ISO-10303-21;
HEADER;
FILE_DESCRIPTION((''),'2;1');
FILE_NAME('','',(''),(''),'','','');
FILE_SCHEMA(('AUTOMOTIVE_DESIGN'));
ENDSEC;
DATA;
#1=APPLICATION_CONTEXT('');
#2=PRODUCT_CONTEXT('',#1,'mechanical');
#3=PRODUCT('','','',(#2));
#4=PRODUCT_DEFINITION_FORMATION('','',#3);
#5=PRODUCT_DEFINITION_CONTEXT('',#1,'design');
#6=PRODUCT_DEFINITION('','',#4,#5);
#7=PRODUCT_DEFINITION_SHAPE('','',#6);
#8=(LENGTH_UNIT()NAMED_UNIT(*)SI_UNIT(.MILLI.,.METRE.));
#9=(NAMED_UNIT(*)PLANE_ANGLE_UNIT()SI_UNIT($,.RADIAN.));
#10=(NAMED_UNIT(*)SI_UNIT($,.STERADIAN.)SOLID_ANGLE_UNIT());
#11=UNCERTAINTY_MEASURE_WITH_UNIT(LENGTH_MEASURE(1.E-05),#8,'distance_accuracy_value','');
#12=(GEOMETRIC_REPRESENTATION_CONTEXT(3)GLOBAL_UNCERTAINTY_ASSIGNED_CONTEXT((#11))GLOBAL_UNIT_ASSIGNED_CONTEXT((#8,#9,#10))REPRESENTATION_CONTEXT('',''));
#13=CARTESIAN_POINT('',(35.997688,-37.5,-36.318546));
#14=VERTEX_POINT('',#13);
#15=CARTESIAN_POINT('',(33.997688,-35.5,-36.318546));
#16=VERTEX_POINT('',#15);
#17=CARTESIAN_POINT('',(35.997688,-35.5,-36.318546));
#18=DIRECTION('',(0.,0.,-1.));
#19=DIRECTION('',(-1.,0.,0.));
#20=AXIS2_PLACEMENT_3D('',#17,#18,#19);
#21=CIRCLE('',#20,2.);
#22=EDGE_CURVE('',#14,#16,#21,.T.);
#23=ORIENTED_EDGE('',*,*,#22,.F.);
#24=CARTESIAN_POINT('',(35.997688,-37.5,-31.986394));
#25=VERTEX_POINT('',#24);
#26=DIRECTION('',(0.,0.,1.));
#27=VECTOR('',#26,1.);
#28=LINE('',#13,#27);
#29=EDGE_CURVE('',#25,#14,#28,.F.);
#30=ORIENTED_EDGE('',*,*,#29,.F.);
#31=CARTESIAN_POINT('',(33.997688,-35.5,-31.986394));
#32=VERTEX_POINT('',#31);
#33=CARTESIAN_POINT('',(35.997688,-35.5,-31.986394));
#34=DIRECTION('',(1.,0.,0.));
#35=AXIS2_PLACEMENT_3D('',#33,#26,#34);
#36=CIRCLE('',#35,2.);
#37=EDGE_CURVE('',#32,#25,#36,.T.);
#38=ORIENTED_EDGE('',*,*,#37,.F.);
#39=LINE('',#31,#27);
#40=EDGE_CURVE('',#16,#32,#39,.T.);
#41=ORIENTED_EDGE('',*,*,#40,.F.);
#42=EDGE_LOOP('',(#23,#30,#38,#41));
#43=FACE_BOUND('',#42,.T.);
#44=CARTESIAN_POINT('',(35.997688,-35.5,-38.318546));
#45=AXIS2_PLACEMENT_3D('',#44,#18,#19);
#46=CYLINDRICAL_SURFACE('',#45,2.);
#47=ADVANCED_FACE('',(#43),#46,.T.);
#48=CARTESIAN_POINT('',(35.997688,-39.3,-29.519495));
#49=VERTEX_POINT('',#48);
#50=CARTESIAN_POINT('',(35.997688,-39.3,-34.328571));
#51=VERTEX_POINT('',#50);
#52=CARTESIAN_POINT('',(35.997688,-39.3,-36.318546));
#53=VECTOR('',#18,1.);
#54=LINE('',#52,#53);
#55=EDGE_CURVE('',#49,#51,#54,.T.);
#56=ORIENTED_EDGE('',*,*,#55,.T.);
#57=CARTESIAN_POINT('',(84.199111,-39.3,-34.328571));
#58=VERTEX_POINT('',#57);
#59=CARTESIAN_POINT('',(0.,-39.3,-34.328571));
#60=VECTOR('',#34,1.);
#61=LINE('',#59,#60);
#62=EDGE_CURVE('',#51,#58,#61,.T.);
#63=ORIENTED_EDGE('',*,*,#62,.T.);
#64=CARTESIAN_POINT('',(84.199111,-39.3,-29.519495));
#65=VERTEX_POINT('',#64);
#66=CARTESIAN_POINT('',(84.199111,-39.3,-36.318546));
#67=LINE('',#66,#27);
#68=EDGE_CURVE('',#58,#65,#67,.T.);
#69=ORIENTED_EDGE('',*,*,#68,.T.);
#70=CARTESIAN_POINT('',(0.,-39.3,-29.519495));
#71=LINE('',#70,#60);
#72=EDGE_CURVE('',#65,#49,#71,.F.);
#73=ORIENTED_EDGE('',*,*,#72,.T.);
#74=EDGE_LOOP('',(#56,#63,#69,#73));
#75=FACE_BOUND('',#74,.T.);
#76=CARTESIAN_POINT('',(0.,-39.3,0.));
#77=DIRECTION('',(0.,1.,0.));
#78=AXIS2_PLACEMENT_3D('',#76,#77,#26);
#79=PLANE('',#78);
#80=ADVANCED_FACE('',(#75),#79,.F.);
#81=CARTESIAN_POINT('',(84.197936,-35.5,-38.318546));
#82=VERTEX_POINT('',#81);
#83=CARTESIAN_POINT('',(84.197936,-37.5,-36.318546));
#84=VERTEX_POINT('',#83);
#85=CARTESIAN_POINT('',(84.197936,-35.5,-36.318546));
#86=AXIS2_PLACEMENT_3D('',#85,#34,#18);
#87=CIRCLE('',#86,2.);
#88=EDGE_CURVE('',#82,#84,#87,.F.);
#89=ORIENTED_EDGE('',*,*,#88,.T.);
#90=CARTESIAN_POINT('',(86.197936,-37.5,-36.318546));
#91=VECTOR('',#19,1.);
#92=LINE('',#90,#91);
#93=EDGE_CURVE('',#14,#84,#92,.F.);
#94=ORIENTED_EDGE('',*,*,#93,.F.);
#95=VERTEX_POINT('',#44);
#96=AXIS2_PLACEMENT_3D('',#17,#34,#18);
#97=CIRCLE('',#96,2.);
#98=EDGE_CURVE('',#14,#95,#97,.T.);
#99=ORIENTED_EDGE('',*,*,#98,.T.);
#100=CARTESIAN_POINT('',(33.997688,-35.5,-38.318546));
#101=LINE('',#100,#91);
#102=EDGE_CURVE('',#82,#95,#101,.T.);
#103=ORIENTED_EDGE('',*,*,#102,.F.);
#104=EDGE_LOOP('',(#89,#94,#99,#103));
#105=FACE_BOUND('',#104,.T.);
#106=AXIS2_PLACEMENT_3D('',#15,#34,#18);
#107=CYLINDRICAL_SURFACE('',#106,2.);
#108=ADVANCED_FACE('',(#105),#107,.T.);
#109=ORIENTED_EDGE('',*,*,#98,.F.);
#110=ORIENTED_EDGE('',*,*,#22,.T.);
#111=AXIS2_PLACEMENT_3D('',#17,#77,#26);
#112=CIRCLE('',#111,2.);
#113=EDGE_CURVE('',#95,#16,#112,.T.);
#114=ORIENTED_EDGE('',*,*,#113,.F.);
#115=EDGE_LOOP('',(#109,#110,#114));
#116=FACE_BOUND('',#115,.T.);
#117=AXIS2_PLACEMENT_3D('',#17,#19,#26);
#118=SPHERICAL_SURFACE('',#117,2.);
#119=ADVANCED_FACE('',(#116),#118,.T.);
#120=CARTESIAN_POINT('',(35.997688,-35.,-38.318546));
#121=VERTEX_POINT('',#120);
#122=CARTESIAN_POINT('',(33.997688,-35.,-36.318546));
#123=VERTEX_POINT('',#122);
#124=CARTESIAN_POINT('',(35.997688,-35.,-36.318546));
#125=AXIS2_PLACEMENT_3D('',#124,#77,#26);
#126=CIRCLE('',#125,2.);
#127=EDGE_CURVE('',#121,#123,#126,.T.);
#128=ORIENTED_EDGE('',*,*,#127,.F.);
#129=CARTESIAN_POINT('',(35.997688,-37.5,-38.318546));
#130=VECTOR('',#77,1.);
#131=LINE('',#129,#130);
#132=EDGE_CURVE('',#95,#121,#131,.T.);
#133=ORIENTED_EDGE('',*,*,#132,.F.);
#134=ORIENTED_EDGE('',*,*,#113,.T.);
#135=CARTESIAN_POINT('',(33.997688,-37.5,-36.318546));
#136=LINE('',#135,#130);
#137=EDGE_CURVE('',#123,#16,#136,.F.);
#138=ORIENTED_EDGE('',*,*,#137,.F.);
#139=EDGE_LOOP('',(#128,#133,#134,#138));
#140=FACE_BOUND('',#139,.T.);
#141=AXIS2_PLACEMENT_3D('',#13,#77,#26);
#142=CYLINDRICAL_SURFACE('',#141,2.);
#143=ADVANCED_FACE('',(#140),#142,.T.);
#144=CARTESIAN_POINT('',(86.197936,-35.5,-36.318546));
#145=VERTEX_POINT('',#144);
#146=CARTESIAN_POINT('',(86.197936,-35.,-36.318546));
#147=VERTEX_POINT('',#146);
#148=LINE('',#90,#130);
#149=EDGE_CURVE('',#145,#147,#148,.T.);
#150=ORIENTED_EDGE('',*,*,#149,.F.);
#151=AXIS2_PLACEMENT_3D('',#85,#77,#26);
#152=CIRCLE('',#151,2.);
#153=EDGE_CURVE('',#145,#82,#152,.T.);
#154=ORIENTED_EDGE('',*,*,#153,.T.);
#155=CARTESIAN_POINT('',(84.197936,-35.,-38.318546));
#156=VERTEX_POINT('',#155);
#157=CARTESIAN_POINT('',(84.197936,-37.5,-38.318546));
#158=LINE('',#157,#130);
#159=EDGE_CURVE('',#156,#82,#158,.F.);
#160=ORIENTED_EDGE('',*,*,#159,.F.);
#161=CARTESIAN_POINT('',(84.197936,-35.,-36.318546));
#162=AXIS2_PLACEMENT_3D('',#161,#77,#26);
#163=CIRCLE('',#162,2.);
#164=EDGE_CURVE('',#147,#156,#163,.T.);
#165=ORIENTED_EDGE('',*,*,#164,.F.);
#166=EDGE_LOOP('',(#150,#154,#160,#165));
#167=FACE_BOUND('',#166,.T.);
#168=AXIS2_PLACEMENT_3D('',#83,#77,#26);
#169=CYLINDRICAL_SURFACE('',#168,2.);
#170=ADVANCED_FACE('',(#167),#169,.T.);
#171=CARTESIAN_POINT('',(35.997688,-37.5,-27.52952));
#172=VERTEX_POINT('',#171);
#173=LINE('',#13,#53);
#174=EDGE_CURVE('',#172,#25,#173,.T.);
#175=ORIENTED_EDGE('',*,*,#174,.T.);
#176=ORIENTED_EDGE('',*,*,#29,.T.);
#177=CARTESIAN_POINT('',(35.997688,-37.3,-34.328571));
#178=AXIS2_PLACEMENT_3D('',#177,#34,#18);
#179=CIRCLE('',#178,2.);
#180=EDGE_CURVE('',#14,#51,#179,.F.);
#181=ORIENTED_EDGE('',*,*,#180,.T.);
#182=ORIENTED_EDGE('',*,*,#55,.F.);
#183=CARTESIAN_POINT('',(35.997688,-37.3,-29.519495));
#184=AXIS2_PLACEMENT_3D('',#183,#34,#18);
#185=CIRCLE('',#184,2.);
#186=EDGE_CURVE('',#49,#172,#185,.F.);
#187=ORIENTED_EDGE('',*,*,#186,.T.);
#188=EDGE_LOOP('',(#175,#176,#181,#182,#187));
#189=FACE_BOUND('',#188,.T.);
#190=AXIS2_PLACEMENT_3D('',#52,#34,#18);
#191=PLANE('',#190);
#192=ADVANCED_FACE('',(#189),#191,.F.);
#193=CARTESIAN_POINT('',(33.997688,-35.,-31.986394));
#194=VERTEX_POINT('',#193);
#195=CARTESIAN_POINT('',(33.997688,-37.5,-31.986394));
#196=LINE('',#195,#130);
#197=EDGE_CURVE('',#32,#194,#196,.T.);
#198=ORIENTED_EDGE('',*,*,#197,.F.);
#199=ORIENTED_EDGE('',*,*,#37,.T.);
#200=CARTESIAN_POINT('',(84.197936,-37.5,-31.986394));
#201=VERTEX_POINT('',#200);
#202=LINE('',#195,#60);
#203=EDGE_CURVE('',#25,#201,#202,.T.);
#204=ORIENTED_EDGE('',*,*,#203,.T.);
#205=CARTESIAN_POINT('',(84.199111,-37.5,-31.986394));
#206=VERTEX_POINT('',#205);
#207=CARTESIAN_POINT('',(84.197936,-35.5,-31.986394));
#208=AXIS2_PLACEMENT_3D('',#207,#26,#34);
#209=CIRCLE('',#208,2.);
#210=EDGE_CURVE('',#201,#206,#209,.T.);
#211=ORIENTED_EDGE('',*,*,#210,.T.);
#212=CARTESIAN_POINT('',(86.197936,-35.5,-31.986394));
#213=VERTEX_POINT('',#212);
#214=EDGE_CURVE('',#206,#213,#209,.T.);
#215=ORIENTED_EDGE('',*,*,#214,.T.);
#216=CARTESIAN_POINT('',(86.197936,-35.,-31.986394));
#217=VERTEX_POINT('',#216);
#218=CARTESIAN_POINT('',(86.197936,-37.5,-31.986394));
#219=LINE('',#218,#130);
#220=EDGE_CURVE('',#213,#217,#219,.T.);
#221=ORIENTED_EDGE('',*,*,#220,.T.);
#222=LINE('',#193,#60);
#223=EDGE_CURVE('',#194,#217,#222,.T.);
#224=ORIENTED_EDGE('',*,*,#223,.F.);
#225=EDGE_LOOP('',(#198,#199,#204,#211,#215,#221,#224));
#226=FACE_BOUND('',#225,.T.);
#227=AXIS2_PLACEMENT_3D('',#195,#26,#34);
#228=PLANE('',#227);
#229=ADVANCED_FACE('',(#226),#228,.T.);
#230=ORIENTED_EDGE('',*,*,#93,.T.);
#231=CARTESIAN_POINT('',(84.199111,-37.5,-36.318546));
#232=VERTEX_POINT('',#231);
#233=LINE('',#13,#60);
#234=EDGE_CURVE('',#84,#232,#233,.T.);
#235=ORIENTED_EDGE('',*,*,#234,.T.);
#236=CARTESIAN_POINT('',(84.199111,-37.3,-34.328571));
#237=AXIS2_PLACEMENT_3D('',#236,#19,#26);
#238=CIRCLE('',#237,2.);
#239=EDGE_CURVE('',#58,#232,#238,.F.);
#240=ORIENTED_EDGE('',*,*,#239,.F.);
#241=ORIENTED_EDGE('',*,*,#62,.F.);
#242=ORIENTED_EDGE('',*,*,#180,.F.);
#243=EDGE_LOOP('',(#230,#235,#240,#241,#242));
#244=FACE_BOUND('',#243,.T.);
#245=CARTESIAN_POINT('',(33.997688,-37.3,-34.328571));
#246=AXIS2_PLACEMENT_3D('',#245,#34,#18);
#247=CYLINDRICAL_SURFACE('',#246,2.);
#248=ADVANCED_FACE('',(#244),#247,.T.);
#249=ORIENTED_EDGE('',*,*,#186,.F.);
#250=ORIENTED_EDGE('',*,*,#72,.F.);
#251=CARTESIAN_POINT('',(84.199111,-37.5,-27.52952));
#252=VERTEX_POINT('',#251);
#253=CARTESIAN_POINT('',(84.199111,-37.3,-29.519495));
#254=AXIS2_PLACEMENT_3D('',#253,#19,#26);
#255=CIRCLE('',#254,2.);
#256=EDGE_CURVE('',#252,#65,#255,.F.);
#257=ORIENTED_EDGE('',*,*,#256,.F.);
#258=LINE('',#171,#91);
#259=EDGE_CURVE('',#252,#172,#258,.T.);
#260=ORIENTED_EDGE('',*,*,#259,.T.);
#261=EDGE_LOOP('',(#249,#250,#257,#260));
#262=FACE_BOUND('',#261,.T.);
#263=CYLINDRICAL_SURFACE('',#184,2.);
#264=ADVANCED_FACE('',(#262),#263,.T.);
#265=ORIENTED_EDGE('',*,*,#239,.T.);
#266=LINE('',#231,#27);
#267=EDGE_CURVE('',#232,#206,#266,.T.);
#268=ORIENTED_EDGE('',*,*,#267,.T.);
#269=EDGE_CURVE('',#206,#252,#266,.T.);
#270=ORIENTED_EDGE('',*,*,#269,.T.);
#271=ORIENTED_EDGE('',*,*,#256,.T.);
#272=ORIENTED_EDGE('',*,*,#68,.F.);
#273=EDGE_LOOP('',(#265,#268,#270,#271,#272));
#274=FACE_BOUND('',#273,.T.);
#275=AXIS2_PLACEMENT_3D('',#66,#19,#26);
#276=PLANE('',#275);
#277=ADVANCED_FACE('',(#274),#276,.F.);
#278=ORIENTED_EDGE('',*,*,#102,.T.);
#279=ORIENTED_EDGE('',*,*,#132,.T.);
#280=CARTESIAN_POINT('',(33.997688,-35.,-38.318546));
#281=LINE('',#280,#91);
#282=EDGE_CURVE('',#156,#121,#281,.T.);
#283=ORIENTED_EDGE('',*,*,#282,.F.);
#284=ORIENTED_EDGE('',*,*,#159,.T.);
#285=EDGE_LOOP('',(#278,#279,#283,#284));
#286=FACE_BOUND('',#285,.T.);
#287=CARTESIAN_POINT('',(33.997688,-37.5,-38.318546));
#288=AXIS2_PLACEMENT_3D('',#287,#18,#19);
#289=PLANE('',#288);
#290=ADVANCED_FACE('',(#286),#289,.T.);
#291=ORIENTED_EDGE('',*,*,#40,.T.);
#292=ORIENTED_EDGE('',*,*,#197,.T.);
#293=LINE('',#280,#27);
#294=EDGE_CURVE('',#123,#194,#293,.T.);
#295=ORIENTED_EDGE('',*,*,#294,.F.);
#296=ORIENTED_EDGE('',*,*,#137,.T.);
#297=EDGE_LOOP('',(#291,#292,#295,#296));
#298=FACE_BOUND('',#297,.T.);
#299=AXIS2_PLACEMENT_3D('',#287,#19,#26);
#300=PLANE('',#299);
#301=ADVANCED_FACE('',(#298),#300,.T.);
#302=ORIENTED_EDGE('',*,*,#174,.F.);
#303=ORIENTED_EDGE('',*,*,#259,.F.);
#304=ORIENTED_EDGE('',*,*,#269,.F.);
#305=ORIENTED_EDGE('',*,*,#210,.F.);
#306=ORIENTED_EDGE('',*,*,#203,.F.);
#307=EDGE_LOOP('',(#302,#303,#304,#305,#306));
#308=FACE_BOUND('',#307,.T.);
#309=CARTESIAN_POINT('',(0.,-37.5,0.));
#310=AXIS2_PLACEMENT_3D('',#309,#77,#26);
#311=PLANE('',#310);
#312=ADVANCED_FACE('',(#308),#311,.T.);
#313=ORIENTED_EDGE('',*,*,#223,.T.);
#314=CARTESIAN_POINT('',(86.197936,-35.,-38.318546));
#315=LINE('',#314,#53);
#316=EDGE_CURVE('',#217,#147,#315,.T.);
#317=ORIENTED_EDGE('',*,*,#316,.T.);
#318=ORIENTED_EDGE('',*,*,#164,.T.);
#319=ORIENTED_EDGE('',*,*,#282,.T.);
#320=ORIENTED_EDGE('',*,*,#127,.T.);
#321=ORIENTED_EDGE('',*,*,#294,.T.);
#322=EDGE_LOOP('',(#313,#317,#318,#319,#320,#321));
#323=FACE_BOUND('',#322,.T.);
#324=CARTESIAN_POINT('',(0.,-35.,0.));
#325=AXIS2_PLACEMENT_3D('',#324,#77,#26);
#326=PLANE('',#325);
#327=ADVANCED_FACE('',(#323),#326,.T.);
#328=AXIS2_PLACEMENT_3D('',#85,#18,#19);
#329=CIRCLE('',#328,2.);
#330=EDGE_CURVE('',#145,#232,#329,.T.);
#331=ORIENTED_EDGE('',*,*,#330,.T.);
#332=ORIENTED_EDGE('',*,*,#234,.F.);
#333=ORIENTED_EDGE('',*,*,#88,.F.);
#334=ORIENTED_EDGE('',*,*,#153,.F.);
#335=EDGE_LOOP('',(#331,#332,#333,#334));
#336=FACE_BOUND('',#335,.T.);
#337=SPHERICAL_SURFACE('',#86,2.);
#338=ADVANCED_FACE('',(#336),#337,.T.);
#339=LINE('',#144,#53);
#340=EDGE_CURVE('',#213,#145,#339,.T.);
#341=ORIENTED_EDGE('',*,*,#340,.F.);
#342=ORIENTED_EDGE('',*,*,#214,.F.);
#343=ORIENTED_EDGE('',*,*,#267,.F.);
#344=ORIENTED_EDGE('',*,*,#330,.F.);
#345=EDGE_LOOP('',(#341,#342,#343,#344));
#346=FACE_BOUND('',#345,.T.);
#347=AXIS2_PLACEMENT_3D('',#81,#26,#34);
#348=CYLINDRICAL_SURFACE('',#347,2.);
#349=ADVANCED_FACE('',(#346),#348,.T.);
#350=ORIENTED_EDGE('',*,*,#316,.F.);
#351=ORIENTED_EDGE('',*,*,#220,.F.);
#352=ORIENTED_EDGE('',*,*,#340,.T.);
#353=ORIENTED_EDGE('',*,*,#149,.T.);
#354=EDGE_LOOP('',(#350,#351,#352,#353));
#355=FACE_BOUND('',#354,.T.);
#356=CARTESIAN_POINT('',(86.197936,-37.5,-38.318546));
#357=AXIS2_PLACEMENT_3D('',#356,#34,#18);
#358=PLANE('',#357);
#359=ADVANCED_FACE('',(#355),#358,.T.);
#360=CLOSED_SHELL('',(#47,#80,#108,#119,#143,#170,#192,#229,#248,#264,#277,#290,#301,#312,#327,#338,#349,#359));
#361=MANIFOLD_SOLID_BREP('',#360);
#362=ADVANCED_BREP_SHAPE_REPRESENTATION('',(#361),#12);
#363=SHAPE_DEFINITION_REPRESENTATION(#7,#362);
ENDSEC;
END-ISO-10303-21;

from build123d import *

# Parameters (mm, degrees)
SKETCH1_W           = 52.200247598
SKETCH1_H           = 6.332152384
BOSS_EXTRUDE1_DEPTH = 2.5
FILLET1_R           = 2
FILLET2_R           = 2
SKETCH4_W           = 48.201423078
SKETCH4_H           = 8.78902621
BOSS_EXTRUDE2_DEPTH = 1.8
FILLET3_R           = 2
FILLET4_R           = 2


with BuildPart() as part:
    # Sketch1 → Boss-Extrude1 (new body)
    with BuildSketch(Plane(origin=(0, -35, 0), x_dir=(1, 0, 0), z_dir=(0, 1, 0))):
        with Locations((60.097811714, 35.152469917)):
            Rectangle(SKETCH1_W, SKETCH1_H)
    extrude(amount=-BOSS_EXTRUDE1_DEPTH)

    # Fillet1
    fillet1_edges = [part.edges().sort_by_distance(p)[0] for p in [
        (60.097811714, -37.5, -38.318546109),
    ]]
    fillet(fillet1_edges, radius=FILLET1_R)

    # Fillet2
    fillet2_edges = [part.edges().sort_by_distance(p)[0] for p in [
        (86.197935513, -37.5, -34.152469917),
        (86.197935513, -35.25, -38.318546109),
        (33.997687915, -35.25, -38.318546109),
        (33.997687915, -37.5, -34.152469917),
        (33.997687915, -36.914213562, -37.732759671),
        (86.197935513, -36.914213562, -37.732759671),
    ]]
    fillet(fillet2_edges, radius=FILLET2_R)


with BuildPart() as boss_extrude2_tool:
    # Sketch4 → Boss-Extrude2 (new body)
    with BuildSketch(Plane.XZ.offset(37.5)):
        with Locations((60.098399454, -31.924033004)):
            Rectangle(SKETCH4_W, SKETCH4_H)
    extrude(amount=BOSS_EXTRUDE2_DEPTH)


with BuildPart() as part_1:
    add(part.part)


with BuildPart() as part_2:
    # Boss-Extrude2: joined with boss_extrude2_tool
    add(part_1.part.fuse(boss_extrude2_tool.part, tol=0.00001))

    # Fillet3
    # the kernel refuses this fillet: 2 mm, written as the material it takes off along each edge
    with BuildSketch(Plane(origin=(89.174048179, -39.3, -27.529519899), x_dir=(0, 0, -1), z_dir=(-1, 0, 0))) as fillet3_piece_1:
        with BuildLine():
            CenterArc((1.989974874, -2), FILLET3_R, 90, 84.260829523)
            Line((0, -1.8), (-0.039799497, -1.796))
            ThreePointArc((-0.039799497, -1.796), (-0.04, -0.9), (-0.04, 0))
            Line((-0.04, 0), (0, 0.04))
            Line((0, 0.04), (1.989974874, 0.04))
            Line((1.989974874, 0.04), (1.989974874, 0))
        make_face()
    extrude(amount=58.151297449, mode=Mode.SUBTRACT)

    # Fillet4
    # the kernel refuses this fillet: 2 mm, written as the material it takes off along each edge
    with BuildSketch(Plane(origin=(31.02275073, -39.3, -36.318546109), x_dir=(0, 1, 0), z_dir=(1, 0, 0))) as fillet4_piece_1:
        with BuildLine():
            CenterArc((2, 1.989974874), FILLET4_R, 180, 84.260829523)
            Line((0, 1.989974874), (-0.04, 1.989974874))
            Line((-0.04, 1.989974874), (-0.04, 0))
            Line((-0.04, 0), (0, -0.04))
            ThreePointArc((0, -0.04), (0.9, -0.04), (1.796, -0.039799497))
            Line((1.796, -0.039799497), (1.8, 0))
        make_face()
    extrude(amount=58.151297449, mode=Mode.SUBTRACT)


solid = part_2.part
